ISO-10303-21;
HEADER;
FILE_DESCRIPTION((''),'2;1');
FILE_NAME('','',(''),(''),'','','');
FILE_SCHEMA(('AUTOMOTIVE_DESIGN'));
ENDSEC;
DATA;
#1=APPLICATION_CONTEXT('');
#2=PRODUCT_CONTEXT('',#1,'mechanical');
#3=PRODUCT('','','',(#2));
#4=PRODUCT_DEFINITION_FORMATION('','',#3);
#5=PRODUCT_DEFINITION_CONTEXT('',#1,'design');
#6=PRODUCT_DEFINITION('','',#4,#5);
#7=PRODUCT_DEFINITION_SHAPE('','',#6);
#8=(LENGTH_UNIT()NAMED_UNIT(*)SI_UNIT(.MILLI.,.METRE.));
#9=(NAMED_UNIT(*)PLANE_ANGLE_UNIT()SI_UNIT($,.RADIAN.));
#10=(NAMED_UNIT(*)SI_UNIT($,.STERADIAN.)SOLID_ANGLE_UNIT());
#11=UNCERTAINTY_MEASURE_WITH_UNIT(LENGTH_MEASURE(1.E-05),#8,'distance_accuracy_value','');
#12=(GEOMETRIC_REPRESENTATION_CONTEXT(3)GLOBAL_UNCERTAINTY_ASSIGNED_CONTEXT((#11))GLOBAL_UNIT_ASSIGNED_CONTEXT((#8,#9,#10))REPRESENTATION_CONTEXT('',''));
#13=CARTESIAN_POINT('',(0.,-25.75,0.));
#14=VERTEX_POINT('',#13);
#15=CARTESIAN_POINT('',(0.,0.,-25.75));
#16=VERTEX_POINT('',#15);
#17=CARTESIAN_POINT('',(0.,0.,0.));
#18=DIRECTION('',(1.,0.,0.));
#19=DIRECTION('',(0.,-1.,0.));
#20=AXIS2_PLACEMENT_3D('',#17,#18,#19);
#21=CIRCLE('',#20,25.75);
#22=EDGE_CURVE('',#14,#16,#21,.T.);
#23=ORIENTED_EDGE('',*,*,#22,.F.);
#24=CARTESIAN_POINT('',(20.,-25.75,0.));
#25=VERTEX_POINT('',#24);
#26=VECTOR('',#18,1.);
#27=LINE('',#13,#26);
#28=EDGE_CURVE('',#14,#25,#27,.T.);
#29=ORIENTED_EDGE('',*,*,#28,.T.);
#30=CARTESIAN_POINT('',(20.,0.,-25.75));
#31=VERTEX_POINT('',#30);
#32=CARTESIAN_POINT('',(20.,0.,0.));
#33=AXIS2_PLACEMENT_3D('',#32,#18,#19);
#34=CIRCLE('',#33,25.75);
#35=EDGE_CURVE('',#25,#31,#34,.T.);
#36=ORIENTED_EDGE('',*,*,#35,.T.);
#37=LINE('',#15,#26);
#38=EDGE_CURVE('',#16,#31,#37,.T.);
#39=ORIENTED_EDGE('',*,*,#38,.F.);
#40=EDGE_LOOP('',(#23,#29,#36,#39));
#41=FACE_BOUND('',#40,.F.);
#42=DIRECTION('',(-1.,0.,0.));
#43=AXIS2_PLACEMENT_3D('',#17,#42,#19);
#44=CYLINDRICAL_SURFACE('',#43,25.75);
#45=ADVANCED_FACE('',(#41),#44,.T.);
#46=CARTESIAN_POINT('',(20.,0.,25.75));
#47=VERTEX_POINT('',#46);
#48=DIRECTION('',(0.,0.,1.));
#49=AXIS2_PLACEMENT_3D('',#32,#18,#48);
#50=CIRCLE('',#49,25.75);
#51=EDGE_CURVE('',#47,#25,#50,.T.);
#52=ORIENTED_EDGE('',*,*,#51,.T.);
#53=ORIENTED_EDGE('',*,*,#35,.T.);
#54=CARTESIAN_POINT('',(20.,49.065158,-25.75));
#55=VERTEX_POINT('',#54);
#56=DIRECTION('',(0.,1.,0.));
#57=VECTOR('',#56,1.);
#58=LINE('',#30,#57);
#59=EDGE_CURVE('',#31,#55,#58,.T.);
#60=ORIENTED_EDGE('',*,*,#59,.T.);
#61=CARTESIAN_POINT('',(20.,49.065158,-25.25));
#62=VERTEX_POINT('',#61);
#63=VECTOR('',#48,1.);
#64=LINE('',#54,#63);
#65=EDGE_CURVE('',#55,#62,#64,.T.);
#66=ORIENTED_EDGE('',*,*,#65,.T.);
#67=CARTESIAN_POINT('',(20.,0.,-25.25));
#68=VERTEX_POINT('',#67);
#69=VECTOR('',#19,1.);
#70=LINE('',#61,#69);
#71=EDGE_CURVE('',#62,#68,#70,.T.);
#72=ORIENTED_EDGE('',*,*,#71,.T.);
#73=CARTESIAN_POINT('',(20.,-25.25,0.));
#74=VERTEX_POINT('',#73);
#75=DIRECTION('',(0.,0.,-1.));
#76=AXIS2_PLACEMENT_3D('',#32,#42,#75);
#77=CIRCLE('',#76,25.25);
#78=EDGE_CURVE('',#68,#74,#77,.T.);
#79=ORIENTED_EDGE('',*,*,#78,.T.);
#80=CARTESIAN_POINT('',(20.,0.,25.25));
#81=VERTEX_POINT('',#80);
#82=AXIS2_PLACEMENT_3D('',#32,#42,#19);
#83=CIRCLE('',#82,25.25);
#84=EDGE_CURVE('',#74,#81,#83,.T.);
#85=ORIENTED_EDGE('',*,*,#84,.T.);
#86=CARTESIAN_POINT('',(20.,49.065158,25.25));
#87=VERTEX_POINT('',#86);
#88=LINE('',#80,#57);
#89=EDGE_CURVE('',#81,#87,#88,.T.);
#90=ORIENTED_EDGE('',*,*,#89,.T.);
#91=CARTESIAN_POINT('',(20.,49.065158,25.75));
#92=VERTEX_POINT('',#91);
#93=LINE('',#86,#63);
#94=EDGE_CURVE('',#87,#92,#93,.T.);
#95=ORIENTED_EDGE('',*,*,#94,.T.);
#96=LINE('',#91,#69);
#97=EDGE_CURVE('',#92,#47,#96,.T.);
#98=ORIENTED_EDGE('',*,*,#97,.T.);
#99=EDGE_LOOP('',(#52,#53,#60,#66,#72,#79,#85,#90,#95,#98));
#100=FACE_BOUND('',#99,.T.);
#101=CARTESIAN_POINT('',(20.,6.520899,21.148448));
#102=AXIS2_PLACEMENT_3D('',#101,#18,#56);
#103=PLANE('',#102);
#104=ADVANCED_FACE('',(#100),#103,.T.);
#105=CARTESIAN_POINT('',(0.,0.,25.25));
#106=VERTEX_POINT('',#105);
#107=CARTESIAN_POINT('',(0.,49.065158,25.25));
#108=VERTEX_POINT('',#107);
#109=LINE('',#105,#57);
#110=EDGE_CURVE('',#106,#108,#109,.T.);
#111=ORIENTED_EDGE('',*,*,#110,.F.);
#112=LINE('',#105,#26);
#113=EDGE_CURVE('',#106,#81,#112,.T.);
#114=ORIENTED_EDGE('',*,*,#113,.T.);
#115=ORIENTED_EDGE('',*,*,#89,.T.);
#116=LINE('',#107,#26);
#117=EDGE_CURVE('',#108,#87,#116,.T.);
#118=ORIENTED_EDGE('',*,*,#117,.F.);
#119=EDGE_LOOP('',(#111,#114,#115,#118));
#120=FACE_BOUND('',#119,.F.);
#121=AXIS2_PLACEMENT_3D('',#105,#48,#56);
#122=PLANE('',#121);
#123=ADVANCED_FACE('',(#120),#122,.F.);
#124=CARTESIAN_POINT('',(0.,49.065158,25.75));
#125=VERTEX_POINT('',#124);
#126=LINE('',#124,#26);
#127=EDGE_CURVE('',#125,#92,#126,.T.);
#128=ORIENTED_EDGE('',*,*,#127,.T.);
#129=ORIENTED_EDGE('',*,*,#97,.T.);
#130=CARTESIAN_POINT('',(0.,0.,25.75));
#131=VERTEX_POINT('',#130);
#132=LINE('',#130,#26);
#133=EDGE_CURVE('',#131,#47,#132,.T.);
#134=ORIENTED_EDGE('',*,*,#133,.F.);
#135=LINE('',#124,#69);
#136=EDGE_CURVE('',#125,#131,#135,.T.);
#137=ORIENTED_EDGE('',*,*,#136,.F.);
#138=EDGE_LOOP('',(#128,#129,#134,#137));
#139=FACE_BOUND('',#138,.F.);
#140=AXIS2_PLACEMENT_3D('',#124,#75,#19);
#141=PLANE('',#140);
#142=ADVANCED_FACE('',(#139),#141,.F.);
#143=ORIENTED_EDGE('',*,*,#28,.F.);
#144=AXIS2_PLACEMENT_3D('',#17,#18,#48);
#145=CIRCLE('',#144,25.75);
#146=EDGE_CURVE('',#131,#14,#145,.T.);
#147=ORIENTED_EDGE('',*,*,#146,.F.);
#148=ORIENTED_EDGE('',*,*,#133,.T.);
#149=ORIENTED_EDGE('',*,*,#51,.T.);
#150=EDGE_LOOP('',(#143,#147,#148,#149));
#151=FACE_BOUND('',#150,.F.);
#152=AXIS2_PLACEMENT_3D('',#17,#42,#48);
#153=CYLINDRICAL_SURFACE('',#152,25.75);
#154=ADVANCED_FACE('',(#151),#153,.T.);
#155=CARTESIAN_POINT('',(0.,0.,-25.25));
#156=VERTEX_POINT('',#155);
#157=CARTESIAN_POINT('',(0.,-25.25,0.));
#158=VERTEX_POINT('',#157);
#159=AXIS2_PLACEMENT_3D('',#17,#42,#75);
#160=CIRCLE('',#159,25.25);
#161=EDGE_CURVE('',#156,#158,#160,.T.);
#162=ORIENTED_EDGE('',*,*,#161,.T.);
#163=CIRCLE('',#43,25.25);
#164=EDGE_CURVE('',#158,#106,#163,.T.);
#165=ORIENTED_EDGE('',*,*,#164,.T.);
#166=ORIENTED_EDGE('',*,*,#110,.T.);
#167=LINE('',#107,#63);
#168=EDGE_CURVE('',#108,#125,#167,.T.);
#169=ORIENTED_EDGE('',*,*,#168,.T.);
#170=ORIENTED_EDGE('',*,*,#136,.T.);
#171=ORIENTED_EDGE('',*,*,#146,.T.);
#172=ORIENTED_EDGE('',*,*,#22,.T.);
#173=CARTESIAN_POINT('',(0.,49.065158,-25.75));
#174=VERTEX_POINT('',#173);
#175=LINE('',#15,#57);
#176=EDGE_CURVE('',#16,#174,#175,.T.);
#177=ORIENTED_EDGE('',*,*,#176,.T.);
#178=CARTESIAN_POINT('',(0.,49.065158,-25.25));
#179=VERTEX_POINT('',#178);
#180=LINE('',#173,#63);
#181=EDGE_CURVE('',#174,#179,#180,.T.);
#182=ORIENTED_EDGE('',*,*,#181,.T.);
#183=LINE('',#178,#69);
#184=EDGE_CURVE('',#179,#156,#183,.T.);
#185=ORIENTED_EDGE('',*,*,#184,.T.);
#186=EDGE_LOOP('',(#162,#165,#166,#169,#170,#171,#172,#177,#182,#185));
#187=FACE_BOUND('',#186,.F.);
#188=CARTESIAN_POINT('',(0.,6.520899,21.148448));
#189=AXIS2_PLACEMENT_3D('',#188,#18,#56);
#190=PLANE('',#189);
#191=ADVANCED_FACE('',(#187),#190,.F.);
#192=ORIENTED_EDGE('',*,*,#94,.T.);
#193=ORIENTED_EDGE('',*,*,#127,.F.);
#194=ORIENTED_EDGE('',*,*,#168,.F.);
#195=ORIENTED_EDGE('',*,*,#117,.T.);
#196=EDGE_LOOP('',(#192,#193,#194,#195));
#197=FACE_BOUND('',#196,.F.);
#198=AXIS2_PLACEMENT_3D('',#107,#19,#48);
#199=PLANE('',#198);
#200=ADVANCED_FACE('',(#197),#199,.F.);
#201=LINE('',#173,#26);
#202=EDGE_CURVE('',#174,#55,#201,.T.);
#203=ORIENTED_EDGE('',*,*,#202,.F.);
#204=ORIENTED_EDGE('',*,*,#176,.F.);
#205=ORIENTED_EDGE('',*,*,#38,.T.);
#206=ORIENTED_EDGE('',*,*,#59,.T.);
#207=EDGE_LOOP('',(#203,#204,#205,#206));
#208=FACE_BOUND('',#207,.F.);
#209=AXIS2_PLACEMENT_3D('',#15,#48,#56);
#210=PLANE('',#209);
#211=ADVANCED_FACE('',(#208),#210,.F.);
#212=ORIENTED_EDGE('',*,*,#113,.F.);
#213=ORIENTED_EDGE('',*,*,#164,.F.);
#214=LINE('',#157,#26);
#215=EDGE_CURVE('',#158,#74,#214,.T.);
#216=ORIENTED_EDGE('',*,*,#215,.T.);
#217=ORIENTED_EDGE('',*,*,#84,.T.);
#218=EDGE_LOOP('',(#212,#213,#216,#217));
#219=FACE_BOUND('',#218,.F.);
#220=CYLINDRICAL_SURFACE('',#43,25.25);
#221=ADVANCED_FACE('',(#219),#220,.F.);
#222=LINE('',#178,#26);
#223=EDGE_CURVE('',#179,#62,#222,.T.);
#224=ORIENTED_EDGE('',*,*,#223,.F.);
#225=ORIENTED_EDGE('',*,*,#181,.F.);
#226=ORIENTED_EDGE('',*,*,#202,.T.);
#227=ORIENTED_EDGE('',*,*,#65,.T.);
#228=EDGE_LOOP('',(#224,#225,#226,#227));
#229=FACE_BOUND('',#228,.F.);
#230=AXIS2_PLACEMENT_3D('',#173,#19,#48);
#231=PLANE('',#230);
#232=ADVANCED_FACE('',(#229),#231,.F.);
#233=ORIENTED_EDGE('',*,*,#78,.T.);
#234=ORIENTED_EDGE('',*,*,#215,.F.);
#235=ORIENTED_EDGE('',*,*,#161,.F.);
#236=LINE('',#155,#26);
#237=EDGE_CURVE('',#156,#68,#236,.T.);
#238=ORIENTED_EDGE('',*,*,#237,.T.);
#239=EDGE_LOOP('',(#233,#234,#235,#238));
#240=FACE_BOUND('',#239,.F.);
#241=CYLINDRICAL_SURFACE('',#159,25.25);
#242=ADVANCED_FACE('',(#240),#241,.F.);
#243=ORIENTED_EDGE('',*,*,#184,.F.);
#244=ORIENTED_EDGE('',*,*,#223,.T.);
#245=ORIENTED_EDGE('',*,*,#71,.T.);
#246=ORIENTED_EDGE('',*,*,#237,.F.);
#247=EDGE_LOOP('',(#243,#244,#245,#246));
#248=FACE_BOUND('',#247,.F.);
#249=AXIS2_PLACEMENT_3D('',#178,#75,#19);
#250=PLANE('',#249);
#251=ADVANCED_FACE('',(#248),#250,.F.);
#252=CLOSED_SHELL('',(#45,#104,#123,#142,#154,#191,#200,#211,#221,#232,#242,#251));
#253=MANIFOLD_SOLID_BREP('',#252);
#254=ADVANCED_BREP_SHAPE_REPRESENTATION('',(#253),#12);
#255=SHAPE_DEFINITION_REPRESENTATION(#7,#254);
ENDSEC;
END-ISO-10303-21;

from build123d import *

# Parameters (mm, degrees)
F4_DEPTH = 20


# Not quite as in the source:
# - a feature of the source that left no trace in its solid (it failed there, or was rolled back) is left out


with BuildPart() as f4:
    # F2 (on Right) → F4 (new body)
    with BuildSketch(Plane.YZ):
        with BuildLine():
            ThreePointArc((-25.25, 0), (-17.854446225, 17.854446225), (0, 25.25))
            Line((0, 25.25), (49.0651577711, 25.25))
            Line((49.0651577711, 25.25), (49.0651577711, 25.75))
            Line((49.0651577711, 25.75), (0, 25.75))
            ThreePointArc((0, 25.75), (-18.2079996156, 18.2079996156), (-25.75, 0))
            Line((-25.75, 0), (-25.25, 0))
        make_face()
        with BuildLine():
            ThreePointArc((0, -25.25), (-17.854446225, -17.854446225), (-25.25, 0))
            Line((-25.25, 0), (-25.75, 0))
            ThreePointArc((-25.75, 0), (-18.2079996156, -18.2079996156), (0, -25.75))
            Line((0, -25.75), (49.0651577711, -25.75))
            Line((49.0651577711, -25.75), (49.0651577711, -25.25))
            Line((49.0651577711, -25.25), (0, -25.25))
        make_face()
    extrude(amount=F4_DEPTH)


solid = f4.part
